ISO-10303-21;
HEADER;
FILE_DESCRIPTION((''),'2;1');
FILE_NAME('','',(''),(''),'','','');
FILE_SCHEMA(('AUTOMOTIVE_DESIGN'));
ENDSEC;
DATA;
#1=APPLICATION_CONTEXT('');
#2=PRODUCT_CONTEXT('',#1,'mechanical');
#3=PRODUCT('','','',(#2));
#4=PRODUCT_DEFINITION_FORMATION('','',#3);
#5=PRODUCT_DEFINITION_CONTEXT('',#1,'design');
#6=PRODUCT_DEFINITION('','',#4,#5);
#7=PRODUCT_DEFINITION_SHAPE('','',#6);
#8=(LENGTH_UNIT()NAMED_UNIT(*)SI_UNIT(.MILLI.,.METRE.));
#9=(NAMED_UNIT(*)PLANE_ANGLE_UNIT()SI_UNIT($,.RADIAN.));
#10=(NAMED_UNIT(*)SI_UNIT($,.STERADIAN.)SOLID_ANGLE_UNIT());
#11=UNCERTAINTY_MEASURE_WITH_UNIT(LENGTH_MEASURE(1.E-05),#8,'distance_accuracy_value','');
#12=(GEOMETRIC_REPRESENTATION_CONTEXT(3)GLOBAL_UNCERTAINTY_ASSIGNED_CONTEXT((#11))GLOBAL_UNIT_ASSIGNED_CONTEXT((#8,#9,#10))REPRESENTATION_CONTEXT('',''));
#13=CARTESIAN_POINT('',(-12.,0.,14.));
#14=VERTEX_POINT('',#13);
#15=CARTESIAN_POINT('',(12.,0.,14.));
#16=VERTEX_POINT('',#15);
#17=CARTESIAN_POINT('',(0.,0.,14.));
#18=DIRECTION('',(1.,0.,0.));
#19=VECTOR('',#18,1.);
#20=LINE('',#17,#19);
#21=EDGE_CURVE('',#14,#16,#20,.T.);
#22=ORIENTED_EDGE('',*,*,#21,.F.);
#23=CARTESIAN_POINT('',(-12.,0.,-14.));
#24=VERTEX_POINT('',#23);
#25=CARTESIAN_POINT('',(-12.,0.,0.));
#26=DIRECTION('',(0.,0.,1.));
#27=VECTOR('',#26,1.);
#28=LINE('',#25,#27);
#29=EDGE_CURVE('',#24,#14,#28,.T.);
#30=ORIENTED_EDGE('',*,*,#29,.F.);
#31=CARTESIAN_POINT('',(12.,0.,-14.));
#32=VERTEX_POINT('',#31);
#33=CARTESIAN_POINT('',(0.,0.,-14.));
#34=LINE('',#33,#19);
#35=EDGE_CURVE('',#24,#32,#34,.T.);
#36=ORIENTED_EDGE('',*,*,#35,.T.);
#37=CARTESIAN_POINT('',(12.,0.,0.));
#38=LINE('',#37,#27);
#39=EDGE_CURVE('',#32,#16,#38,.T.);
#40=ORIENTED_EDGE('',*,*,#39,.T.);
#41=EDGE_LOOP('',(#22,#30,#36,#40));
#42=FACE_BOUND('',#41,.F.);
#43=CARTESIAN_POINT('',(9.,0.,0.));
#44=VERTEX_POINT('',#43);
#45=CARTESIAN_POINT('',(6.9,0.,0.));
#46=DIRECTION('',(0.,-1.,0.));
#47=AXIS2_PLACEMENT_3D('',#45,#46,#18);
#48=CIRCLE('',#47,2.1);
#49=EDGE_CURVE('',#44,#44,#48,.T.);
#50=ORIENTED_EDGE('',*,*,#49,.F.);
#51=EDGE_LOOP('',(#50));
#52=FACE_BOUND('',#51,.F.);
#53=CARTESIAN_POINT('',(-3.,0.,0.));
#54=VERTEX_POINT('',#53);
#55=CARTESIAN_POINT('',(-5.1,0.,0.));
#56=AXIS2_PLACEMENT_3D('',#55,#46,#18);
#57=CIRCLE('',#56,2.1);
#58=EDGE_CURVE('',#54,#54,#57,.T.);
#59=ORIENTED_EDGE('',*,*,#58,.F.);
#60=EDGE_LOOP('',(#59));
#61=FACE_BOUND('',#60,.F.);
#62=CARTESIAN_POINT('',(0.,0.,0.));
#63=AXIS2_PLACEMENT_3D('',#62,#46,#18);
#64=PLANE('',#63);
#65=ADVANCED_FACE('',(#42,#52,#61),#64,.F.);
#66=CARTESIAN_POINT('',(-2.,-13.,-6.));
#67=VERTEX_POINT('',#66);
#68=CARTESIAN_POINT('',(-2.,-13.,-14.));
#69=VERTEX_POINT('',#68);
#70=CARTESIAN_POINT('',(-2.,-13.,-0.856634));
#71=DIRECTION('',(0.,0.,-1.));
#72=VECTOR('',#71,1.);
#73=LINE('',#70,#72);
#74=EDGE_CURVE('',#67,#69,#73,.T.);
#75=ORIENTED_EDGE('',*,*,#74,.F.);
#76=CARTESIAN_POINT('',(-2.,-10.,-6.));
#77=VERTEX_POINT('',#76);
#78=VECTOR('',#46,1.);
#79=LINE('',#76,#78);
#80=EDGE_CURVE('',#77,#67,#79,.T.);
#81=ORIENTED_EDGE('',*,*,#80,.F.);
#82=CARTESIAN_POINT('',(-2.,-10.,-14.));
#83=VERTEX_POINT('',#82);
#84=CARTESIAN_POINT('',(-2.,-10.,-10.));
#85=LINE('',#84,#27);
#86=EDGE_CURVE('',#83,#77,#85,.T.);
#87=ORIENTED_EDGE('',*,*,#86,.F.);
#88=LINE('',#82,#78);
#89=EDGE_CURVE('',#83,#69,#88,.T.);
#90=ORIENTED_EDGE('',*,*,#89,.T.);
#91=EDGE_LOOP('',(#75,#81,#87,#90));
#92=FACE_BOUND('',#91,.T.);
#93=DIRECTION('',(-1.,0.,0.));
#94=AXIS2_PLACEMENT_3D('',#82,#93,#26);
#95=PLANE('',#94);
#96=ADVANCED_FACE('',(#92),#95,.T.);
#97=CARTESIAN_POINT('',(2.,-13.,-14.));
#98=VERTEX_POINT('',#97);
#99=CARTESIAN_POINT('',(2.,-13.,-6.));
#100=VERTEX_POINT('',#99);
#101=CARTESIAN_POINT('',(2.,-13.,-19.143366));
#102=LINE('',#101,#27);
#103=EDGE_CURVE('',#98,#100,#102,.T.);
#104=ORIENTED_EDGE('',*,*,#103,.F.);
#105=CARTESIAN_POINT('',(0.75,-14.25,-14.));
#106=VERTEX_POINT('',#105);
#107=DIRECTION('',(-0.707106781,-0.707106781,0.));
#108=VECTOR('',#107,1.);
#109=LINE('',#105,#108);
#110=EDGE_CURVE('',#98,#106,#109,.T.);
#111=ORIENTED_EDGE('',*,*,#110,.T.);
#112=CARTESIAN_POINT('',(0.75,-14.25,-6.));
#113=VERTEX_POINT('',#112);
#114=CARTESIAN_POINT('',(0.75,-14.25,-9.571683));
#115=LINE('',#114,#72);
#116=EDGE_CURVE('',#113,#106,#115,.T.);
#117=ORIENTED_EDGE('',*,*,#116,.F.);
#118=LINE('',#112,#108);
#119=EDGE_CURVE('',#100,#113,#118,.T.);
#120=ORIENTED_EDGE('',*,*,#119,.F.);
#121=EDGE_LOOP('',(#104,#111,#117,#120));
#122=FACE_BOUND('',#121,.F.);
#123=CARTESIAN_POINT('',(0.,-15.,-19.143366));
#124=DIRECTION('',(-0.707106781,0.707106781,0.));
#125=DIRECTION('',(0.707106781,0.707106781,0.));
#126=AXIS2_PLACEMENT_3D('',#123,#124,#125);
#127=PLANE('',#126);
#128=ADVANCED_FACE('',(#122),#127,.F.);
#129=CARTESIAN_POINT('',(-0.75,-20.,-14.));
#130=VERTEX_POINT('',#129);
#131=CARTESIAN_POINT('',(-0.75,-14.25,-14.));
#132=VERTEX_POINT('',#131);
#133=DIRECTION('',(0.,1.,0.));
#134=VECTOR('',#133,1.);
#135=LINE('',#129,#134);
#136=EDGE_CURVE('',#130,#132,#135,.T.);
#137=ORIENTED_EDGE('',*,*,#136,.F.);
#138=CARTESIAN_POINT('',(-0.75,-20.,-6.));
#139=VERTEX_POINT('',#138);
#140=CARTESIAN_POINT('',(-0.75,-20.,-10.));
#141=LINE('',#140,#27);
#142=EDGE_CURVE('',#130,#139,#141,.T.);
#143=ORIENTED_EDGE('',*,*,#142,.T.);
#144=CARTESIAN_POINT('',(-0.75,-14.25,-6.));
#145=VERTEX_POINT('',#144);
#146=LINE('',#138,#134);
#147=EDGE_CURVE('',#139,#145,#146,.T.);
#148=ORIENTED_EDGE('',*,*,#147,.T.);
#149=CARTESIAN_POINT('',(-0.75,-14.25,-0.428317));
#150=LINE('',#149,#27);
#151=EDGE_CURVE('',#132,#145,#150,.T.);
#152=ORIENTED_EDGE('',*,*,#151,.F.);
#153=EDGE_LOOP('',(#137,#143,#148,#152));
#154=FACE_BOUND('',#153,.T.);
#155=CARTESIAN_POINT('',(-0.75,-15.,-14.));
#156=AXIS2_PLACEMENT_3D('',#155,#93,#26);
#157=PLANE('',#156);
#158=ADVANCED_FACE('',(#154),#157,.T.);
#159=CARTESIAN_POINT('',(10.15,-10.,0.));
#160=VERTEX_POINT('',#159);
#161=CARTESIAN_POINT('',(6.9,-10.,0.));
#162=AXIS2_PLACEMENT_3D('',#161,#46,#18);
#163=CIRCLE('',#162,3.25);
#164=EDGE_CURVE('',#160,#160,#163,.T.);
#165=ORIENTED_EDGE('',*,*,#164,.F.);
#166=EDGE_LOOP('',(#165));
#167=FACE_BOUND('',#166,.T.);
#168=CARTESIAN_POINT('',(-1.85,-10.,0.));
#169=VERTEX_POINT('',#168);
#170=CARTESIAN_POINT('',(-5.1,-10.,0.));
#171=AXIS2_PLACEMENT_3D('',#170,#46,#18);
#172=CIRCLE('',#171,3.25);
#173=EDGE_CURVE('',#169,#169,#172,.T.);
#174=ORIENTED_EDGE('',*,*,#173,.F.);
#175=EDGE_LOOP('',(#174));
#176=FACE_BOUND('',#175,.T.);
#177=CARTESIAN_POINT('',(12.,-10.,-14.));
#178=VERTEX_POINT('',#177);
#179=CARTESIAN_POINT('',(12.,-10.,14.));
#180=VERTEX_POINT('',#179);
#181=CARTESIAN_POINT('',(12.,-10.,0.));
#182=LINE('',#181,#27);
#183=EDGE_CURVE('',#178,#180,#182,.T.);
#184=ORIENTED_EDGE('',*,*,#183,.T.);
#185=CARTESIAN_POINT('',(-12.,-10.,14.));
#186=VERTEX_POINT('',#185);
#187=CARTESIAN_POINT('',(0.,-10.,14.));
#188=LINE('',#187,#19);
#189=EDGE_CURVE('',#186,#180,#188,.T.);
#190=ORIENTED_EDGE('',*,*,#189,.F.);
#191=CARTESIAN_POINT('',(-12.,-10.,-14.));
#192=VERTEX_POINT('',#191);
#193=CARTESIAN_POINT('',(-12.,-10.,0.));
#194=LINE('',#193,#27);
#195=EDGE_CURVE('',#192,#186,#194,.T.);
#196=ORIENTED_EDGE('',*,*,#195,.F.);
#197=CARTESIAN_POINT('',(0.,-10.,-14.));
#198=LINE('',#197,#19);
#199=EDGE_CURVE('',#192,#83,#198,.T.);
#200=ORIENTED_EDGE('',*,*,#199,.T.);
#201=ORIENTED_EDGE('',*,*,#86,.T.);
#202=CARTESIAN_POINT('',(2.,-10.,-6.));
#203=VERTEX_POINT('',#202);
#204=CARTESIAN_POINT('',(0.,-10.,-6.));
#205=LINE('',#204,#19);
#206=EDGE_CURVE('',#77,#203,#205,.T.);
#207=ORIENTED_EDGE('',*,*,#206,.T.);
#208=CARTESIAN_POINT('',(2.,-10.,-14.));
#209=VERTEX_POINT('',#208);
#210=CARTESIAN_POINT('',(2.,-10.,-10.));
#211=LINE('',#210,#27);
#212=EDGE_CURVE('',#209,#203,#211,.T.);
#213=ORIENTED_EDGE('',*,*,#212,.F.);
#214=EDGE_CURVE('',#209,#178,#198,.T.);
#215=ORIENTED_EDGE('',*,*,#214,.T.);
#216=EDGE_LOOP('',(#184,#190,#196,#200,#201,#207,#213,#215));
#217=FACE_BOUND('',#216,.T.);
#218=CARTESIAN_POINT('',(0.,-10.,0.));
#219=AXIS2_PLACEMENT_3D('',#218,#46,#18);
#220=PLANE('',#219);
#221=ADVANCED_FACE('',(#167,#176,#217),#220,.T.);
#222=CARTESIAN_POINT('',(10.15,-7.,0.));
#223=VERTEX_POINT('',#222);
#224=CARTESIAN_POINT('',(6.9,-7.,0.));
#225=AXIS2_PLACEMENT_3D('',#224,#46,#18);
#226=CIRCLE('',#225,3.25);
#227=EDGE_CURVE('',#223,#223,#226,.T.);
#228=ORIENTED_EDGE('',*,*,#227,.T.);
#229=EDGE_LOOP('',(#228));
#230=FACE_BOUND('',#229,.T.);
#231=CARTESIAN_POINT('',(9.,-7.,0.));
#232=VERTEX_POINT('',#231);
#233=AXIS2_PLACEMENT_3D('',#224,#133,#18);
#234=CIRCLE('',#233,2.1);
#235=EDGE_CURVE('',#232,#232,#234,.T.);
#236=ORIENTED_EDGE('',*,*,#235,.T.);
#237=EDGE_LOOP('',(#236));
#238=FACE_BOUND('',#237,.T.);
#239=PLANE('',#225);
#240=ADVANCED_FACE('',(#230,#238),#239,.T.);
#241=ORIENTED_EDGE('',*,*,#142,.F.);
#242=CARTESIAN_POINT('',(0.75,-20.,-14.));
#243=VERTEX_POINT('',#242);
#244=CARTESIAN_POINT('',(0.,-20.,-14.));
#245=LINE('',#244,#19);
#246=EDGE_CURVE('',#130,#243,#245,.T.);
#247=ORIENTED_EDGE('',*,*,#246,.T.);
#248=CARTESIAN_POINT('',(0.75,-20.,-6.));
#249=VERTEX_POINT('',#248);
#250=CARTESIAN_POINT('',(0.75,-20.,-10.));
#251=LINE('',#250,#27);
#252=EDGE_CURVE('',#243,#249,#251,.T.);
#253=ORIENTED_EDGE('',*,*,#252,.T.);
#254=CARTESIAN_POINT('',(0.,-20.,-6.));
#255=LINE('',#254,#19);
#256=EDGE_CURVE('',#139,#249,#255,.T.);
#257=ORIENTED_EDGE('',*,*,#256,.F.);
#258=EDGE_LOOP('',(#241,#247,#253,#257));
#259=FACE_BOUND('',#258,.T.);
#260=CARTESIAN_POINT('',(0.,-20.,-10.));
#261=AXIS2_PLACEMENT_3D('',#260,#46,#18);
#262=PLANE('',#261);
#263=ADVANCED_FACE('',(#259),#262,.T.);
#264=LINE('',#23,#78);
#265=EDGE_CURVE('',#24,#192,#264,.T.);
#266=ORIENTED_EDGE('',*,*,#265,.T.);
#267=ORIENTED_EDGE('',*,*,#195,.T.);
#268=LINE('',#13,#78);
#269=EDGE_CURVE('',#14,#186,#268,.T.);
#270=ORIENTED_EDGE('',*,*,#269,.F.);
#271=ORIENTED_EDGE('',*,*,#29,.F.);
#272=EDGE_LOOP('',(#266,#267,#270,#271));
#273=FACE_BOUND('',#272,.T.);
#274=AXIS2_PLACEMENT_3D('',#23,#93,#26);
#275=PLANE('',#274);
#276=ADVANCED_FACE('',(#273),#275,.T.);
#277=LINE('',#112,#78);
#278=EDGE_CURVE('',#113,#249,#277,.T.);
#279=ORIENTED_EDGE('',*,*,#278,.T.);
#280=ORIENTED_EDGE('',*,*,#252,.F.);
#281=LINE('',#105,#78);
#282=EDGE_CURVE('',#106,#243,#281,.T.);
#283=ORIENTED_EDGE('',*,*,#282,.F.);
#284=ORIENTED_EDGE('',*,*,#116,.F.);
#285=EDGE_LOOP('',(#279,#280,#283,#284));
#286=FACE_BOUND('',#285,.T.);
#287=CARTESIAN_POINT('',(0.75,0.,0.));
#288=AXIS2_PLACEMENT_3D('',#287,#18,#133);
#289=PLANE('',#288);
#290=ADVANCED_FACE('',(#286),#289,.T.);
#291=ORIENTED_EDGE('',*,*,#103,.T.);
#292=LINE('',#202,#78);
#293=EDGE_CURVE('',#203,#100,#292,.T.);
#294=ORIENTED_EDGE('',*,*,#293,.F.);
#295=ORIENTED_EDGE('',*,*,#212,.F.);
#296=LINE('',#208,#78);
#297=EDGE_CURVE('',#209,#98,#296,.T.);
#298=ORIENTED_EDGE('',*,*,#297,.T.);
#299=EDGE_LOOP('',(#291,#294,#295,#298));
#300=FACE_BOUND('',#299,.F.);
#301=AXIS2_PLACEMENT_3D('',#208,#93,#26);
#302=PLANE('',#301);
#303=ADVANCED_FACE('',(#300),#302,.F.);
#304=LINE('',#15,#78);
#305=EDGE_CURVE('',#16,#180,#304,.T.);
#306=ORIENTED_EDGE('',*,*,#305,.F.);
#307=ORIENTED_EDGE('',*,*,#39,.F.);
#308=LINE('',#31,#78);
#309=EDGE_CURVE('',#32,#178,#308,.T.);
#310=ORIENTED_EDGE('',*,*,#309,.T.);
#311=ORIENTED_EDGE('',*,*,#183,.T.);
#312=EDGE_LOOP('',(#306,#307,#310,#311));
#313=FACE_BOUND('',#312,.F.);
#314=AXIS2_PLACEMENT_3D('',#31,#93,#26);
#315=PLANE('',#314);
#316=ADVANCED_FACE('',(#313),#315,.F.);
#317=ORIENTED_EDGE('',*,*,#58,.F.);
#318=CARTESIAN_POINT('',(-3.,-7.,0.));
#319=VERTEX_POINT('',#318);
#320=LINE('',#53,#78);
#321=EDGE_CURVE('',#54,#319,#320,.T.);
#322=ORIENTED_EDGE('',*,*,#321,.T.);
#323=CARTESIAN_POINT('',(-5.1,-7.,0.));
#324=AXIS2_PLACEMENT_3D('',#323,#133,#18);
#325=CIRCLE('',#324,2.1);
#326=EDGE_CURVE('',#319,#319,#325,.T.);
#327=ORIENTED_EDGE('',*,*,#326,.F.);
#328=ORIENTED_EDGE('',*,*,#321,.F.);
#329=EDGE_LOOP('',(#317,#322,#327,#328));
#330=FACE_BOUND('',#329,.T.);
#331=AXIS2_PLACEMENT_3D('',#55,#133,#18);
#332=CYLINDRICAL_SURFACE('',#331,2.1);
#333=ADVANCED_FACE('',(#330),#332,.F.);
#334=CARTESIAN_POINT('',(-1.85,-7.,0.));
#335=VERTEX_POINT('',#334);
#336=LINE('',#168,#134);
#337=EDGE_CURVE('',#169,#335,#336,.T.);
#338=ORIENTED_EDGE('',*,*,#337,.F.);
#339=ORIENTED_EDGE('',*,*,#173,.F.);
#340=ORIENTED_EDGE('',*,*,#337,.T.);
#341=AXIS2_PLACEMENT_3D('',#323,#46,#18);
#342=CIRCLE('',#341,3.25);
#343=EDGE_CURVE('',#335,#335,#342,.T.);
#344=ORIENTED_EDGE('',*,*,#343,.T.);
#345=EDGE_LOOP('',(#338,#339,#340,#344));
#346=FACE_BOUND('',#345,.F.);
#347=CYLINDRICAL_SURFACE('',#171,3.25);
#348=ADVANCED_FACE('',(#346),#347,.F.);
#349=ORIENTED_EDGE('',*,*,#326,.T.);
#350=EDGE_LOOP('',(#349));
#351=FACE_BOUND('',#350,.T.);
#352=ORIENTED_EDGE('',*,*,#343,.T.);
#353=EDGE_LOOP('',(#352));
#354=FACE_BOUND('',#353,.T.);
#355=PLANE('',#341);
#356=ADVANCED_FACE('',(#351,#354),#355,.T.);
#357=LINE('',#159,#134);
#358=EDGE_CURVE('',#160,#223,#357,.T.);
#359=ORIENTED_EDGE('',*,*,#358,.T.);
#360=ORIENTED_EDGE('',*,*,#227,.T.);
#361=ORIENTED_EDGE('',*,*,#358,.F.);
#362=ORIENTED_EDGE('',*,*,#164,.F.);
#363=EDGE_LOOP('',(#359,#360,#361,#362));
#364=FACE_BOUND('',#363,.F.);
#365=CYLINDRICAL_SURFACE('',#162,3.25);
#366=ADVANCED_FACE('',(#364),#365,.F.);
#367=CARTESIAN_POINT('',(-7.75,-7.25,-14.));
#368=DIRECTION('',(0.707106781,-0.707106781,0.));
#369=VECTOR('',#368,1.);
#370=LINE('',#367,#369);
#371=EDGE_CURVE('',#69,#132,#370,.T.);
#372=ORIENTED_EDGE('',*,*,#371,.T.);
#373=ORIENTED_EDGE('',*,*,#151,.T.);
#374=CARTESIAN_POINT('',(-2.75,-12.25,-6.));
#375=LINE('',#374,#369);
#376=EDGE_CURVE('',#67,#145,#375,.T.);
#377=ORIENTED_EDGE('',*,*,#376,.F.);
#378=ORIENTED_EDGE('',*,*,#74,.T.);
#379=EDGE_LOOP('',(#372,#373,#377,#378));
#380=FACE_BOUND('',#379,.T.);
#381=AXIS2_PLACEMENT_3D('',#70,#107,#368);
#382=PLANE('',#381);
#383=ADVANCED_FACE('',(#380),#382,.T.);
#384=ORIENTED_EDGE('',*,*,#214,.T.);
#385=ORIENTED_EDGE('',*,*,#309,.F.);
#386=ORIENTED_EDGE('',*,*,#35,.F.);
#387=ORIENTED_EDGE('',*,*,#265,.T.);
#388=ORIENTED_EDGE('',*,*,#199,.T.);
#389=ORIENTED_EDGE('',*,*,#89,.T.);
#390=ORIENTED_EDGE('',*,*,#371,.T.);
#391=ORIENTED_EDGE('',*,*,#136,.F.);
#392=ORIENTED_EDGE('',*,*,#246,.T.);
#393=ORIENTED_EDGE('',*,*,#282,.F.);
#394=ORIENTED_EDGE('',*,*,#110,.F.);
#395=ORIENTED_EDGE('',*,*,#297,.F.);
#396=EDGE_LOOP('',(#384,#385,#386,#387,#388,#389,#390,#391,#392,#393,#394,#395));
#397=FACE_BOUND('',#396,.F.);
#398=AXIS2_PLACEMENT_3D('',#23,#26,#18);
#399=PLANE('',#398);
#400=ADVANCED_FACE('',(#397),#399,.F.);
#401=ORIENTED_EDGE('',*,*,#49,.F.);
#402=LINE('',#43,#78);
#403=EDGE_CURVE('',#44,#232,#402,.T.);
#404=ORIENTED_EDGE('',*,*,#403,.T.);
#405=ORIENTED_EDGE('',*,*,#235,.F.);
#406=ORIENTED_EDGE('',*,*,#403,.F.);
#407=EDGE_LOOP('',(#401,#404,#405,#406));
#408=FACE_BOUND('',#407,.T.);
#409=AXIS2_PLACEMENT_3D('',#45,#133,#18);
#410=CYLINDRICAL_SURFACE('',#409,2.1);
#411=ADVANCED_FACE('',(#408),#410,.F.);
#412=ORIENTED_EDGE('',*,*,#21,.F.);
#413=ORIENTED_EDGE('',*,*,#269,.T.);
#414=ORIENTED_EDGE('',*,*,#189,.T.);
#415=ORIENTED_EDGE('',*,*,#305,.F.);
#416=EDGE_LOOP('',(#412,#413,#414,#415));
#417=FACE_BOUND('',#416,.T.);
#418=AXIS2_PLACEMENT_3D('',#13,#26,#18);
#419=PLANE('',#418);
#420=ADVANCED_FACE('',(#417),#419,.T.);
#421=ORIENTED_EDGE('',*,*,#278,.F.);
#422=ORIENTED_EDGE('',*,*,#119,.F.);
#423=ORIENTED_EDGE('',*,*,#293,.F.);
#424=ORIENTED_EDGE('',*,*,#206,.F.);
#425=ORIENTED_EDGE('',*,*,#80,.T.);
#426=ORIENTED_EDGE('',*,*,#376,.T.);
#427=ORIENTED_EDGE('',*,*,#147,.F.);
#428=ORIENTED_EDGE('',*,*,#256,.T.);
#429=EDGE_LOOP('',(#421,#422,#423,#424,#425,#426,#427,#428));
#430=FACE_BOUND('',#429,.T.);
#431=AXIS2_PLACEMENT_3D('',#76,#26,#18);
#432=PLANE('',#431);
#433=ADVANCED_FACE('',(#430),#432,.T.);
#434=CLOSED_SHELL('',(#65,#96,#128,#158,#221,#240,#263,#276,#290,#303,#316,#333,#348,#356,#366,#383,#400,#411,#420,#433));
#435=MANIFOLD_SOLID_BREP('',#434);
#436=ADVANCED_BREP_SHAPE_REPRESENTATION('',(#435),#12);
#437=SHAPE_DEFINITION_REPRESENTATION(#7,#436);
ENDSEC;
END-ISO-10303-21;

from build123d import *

# Parameters (mm, degrees)
F0_W        = 24
F0_H        = 28
F0_R        = 2.1
F1_DEPTH    = 10
F2_W        = 4
F2_H        = 8
F3_DEPTH    = 5
F4_W        = 1.5
F4_H        = 8
F5_DEPTH    = 5
F6_T4_DEPTH = 18.2867319519
F6_T9_DEPTH = 18.2867319519
F7_R        = 3.25
F8_DEPTH    = 3


# Not quite as in the source:
# - a fillet or chamfer that OpenCascade refuses, or shapes differently, is made with other operations: its cross-section is extruded or revolved along the edge and cut away or added


with BuildPart() as f1:
    # F0 (on Front) → F1 (new body)
    with BuildSketch(Plane.XZ):
        Rectangle(F0_W, F0_H)
        with Locations((-5.1, 0)):
            Circle(F0_R, mode=Mode.SUBTRACT)
        with Locations((6.9, 0)):
            Circle(F0_R, mode=Mode.SUBTRACT)
    extrude(amount=F1_DEPTH)

    # F2 (on face) → F3 (join)
    with BuildSketch(Plane.XZ.offset(10)):
        with Locations((0, -10)):
            Rectangle(F2_W, F2_H)
    extrude(amount=F3_DEPTH)

    # F4 (on face) → F5 (join)
    with BuildSketch(Plane.XZ.offset(15)):
        with Locations((0, -10)):
            Rectangle(F4_W, F4_H)
    extrude(amount=F5_DEPTH)

    # F6: chamfer of 2 on 2 edges, made by hand


with BuildPart() as f6_tool2:
    # F6_s3 → F6_t4 (new body)
    with BuildSketch(Plane.XY.offset(-19.1433659759)):
        Polygon((0, -15), (2, -13), (2, -15), align=None)
    extrude(amount=F6_T4_DEPTH)

    split(bisect_by=Plane.YZ.offset(0.75), keep=Keep.TOP)


with BuildPart() as f1_1:
    add(f1.part)

    # F6_t1: cut F6_tool2
    add(f6_tool2.part, mode=Mode.SUBTRACT)


with BuildPart() as f6_tool7:
    # F6_s8 → F6_t9 (new body)
    with BuildSketch(Plane.XY.offset(-0.8566340241)):
        Polygon((-2, -13), (0, -15), (-2, -15), align=None)
    extrude(amount=-F6_T9_DEPTH)

    split(bisect_by=Plane.YZ.offset(-0.75), keep=Keep.BOTTOM)


with BuildPart() as f1_2:
    add(f1_1.part)

    # F6_t6: cut F6_tool7
    add(f6_tool7.part, mode=Mode.SUBTRACT)

    # F7 (on face) → F8 (cut)
    with BuildSketch(Plane.XZ.offset(10)):
        with Locations((-5.1, 0)):
            Circle(F7_R)
        with Locations((6.9, 0)):
            Circle(F7_R)
    extrude(amount=-F8_DEPTH, mode=Mode.SUBTRACT)


solid = f1_2.part
